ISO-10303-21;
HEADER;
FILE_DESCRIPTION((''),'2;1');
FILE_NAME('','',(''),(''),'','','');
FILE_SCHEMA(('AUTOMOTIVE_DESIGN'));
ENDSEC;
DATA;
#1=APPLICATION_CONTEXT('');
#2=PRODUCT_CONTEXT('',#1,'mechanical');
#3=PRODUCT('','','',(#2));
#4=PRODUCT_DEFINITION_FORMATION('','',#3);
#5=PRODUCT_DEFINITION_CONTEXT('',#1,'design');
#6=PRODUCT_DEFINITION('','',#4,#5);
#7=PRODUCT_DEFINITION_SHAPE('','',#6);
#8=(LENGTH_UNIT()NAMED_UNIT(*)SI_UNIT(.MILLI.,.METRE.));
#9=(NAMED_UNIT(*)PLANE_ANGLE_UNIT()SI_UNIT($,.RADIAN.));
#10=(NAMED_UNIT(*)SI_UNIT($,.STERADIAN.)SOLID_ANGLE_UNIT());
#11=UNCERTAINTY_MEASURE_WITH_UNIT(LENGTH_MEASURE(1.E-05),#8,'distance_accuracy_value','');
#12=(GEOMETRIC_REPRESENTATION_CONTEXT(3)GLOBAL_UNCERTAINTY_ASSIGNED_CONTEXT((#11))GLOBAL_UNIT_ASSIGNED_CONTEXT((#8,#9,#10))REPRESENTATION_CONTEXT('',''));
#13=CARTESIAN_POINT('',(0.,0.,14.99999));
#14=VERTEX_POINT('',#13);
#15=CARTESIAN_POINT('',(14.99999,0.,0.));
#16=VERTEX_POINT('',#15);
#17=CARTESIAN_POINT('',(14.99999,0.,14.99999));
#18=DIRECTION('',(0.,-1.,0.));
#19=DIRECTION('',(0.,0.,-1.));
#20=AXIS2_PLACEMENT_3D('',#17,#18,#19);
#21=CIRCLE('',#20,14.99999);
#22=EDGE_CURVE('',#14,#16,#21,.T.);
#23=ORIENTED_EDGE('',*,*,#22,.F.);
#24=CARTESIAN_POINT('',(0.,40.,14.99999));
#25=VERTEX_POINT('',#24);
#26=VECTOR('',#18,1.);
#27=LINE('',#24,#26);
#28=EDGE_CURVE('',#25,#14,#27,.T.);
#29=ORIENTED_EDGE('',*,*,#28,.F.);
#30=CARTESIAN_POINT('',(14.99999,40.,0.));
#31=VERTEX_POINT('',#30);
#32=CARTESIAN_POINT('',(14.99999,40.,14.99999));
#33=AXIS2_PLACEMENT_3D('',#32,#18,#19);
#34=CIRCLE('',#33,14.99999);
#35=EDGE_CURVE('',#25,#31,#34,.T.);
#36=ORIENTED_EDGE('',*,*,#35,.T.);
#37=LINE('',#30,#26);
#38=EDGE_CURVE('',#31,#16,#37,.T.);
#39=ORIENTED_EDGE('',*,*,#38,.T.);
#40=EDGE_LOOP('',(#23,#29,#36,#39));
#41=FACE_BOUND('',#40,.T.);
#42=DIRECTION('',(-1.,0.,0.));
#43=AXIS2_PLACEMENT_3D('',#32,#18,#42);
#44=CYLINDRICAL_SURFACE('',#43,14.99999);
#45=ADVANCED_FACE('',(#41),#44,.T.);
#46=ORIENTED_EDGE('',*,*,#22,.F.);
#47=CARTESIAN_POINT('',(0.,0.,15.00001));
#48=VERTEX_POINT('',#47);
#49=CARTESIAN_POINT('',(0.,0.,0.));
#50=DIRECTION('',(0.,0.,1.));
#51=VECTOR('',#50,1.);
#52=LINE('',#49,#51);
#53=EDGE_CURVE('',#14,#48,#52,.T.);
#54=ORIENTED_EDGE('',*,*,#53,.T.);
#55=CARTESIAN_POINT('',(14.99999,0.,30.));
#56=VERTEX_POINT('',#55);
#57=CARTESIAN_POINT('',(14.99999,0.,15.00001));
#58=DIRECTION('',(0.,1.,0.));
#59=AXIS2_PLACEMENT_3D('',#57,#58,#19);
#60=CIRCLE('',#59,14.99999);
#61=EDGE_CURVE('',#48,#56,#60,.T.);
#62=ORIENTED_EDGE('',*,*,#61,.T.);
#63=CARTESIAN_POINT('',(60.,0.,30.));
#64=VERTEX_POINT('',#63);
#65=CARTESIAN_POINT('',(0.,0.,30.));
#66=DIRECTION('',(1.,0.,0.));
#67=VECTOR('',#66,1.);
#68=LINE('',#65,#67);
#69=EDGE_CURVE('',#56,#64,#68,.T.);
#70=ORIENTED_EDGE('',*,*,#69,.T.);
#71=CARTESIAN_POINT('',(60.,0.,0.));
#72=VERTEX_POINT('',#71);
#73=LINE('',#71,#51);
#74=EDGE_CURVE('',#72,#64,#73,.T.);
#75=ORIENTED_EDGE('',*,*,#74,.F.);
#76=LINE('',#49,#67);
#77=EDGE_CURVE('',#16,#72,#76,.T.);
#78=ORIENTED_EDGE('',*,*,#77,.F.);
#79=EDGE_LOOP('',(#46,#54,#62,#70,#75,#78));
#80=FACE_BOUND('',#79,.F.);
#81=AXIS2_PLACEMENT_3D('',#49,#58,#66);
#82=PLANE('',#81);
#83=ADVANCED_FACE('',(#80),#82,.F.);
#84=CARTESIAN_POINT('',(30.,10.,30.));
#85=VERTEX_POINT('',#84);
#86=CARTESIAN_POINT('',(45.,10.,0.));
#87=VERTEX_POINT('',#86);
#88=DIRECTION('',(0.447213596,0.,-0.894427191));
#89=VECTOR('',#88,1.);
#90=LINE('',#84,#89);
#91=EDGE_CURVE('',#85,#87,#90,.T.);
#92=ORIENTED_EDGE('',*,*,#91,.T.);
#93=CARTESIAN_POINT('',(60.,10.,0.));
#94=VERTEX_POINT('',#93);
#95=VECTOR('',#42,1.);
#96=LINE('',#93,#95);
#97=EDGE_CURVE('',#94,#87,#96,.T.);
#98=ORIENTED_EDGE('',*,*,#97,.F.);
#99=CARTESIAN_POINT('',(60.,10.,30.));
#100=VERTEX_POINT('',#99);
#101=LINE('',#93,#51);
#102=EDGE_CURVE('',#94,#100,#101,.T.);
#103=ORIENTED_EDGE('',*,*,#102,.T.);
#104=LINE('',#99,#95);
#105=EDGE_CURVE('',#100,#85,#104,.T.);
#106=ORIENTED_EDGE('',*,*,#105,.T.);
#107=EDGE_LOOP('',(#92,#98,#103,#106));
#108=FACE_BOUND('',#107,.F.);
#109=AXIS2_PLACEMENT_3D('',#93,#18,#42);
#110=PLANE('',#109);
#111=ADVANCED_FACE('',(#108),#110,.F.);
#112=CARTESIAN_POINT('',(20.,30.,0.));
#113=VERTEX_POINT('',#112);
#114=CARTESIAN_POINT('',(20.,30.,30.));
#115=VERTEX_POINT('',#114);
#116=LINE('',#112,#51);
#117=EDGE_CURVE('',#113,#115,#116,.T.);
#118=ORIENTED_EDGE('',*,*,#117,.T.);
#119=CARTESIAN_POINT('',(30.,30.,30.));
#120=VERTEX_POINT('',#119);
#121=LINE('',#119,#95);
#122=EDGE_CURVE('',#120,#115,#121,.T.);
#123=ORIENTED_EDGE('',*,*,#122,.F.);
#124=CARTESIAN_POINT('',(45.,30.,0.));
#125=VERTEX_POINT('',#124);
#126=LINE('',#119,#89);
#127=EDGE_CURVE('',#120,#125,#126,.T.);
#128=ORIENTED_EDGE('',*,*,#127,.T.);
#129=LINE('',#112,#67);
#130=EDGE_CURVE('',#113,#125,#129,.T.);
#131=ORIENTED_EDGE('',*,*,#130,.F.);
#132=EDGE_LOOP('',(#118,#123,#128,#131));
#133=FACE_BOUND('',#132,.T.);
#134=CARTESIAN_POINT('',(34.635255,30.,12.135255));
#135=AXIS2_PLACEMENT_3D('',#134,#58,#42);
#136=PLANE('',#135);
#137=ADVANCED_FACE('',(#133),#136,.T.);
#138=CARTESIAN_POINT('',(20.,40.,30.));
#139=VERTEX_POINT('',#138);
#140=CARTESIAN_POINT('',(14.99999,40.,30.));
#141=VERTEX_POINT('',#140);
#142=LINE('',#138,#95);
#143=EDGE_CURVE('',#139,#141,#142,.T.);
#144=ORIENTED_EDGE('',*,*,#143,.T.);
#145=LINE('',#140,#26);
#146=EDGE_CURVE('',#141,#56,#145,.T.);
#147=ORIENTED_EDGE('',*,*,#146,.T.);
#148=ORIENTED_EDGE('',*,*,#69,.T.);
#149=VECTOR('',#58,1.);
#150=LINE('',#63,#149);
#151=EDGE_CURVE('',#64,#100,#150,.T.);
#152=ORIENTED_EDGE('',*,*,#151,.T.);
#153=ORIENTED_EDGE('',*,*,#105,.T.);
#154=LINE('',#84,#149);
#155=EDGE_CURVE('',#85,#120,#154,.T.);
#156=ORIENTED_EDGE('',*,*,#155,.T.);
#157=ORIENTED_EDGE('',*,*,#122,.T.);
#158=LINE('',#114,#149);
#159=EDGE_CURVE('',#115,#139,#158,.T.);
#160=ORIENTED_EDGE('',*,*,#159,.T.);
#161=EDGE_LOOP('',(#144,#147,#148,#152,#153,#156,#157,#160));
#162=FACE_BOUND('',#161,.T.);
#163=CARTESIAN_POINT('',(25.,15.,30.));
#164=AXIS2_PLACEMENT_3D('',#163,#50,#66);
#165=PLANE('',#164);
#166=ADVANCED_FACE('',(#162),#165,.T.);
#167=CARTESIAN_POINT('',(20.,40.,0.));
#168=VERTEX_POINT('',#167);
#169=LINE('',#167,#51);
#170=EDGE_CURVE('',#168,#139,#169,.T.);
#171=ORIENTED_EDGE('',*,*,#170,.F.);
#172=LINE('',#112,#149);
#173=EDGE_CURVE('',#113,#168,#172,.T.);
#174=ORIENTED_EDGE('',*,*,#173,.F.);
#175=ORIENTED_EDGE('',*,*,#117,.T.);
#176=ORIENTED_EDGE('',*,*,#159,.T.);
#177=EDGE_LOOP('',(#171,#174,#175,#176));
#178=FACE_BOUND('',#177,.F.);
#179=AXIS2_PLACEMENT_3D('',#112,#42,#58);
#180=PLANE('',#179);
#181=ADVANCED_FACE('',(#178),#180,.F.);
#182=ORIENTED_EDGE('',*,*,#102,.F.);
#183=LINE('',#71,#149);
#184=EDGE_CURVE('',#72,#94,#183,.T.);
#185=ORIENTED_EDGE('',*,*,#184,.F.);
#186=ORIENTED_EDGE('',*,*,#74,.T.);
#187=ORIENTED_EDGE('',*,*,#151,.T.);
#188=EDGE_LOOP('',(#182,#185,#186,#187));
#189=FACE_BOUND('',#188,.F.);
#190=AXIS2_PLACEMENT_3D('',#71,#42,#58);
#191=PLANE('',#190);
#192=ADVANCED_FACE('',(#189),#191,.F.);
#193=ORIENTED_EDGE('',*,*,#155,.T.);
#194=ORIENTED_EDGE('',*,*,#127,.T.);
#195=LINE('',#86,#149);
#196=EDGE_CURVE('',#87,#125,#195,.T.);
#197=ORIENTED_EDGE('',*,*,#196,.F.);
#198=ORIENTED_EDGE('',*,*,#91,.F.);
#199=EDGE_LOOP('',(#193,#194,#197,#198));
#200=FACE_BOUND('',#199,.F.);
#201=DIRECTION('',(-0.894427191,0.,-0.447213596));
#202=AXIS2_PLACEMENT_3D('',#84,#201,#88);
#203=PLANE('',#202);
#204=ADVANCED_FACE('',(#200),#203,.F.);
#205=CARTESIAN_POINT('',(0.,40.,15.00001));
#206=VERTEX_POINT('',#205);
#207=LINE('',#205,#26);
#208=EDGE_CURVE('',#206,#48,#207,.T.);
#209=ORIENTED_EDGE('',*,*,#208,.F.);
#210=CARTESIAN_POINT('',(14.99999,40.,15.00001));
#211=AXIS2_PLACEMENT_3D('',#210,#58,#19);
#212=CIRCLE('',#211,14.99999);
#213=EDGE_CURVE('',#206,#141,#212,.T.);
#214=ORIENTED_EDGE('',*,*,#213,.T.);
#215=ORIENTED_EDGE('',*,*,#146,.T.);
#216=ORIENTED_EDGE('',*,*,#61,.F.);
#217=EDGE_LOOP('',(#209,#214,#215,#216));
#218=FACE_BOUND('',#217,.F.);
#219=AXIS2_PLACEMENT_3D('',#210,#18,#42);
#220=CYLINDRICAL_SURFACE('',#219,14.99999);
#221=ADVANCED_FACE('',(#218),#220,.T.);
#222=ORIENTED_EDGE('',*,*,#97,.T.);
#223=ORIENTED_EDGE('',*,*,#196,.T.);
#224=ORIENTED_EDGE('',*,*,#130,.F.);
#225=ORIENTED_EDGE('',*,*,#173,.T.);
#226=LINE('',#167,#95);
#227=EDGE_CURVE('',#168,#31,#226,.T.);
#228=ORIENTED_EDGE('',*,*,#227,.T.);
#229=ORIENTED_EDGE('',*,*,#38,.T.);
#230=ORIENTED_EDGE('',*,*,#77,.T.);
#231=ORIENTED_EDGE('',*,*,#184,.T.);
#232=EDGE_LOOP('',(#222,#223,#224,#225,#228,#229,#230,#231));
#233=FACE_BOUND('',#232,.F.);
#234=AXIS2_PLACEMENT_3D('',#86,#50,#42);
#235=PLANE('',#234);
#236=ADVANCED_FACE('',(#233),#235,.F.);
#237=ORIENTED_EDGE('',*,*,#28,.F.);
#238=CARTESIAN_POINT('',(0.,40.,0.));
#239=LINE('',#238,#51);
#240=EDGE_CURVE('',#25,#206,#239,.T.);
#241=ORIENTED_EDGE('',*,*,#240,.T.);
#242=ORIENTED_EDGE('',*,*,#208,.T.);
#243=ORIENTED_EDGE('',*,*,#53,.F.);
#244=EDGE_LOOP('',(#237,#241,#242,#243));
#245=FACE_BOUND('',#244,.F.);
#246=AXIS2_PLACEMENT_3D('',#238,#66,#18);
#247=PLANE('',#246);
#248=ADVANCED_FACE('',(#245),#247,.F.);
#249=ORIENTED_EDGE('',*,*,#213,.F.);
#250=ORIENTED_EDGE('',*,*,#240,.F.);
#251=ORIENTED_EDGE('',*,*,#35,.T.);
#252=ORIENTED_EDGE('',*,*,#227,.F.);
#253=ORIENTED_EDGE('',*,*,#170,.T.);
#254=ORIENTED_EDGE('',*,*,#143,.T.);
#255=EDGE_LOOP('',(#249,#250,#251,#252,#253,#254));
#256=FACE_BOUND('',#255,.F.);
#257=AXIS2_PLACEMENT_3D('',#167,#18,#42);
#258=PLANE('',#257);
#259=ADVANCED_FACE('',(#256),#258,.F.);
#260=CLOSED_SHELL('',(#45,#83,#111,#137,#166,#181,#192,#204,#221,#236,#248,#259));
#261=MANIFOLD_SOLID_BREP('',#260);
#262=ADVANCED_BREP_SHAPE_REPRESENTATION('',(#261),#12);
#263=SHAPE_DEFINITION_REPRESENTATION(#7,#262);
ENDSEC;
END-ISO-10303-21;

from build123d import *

# Parameters (mm, degrees)
F1_DEPTH = 30
F2_R     = 14.99999
F4_DEPTH = 20


# Not quite as in the source:
# - a fillet or chamfer is up to 0.001 mm smaller than in the source, because OpenCascade refuses the exact size


with BuildPart() as f1:
    # F0 (on Top) → F1 (new body)
    with BuildSketch(Plane.XY):
        Polygon((0, 40), (0, 0), (60, 0), (60, 10), (30, 10), (30, 30), (20, 30), (20, 40), align=None)
    extrude(amount=F1_DEPTH)

    # F2 (radius 15 in the source; OpenCascade refuses exactly that, so slightly less here)
    f2_edges = [f1.edges().sort_by_distance(p)[0] for p in [
        (0, 20, 30),
        (0, 20, 0),
    ]]
    fillet(f2_edges, radius=F2_R)

    # F3 (on face) → F4 (join)
    with BuildSketch(Plane(origin=(0, 10, 0), x_dir=(-1, 0, 0), z_dir=(0, 1, 0))):
        Polygon((-30, 0), (-30, 30), (-45, 0), align=None)
    extrude(amount=F4_DEPTH)


solid = f1.part
